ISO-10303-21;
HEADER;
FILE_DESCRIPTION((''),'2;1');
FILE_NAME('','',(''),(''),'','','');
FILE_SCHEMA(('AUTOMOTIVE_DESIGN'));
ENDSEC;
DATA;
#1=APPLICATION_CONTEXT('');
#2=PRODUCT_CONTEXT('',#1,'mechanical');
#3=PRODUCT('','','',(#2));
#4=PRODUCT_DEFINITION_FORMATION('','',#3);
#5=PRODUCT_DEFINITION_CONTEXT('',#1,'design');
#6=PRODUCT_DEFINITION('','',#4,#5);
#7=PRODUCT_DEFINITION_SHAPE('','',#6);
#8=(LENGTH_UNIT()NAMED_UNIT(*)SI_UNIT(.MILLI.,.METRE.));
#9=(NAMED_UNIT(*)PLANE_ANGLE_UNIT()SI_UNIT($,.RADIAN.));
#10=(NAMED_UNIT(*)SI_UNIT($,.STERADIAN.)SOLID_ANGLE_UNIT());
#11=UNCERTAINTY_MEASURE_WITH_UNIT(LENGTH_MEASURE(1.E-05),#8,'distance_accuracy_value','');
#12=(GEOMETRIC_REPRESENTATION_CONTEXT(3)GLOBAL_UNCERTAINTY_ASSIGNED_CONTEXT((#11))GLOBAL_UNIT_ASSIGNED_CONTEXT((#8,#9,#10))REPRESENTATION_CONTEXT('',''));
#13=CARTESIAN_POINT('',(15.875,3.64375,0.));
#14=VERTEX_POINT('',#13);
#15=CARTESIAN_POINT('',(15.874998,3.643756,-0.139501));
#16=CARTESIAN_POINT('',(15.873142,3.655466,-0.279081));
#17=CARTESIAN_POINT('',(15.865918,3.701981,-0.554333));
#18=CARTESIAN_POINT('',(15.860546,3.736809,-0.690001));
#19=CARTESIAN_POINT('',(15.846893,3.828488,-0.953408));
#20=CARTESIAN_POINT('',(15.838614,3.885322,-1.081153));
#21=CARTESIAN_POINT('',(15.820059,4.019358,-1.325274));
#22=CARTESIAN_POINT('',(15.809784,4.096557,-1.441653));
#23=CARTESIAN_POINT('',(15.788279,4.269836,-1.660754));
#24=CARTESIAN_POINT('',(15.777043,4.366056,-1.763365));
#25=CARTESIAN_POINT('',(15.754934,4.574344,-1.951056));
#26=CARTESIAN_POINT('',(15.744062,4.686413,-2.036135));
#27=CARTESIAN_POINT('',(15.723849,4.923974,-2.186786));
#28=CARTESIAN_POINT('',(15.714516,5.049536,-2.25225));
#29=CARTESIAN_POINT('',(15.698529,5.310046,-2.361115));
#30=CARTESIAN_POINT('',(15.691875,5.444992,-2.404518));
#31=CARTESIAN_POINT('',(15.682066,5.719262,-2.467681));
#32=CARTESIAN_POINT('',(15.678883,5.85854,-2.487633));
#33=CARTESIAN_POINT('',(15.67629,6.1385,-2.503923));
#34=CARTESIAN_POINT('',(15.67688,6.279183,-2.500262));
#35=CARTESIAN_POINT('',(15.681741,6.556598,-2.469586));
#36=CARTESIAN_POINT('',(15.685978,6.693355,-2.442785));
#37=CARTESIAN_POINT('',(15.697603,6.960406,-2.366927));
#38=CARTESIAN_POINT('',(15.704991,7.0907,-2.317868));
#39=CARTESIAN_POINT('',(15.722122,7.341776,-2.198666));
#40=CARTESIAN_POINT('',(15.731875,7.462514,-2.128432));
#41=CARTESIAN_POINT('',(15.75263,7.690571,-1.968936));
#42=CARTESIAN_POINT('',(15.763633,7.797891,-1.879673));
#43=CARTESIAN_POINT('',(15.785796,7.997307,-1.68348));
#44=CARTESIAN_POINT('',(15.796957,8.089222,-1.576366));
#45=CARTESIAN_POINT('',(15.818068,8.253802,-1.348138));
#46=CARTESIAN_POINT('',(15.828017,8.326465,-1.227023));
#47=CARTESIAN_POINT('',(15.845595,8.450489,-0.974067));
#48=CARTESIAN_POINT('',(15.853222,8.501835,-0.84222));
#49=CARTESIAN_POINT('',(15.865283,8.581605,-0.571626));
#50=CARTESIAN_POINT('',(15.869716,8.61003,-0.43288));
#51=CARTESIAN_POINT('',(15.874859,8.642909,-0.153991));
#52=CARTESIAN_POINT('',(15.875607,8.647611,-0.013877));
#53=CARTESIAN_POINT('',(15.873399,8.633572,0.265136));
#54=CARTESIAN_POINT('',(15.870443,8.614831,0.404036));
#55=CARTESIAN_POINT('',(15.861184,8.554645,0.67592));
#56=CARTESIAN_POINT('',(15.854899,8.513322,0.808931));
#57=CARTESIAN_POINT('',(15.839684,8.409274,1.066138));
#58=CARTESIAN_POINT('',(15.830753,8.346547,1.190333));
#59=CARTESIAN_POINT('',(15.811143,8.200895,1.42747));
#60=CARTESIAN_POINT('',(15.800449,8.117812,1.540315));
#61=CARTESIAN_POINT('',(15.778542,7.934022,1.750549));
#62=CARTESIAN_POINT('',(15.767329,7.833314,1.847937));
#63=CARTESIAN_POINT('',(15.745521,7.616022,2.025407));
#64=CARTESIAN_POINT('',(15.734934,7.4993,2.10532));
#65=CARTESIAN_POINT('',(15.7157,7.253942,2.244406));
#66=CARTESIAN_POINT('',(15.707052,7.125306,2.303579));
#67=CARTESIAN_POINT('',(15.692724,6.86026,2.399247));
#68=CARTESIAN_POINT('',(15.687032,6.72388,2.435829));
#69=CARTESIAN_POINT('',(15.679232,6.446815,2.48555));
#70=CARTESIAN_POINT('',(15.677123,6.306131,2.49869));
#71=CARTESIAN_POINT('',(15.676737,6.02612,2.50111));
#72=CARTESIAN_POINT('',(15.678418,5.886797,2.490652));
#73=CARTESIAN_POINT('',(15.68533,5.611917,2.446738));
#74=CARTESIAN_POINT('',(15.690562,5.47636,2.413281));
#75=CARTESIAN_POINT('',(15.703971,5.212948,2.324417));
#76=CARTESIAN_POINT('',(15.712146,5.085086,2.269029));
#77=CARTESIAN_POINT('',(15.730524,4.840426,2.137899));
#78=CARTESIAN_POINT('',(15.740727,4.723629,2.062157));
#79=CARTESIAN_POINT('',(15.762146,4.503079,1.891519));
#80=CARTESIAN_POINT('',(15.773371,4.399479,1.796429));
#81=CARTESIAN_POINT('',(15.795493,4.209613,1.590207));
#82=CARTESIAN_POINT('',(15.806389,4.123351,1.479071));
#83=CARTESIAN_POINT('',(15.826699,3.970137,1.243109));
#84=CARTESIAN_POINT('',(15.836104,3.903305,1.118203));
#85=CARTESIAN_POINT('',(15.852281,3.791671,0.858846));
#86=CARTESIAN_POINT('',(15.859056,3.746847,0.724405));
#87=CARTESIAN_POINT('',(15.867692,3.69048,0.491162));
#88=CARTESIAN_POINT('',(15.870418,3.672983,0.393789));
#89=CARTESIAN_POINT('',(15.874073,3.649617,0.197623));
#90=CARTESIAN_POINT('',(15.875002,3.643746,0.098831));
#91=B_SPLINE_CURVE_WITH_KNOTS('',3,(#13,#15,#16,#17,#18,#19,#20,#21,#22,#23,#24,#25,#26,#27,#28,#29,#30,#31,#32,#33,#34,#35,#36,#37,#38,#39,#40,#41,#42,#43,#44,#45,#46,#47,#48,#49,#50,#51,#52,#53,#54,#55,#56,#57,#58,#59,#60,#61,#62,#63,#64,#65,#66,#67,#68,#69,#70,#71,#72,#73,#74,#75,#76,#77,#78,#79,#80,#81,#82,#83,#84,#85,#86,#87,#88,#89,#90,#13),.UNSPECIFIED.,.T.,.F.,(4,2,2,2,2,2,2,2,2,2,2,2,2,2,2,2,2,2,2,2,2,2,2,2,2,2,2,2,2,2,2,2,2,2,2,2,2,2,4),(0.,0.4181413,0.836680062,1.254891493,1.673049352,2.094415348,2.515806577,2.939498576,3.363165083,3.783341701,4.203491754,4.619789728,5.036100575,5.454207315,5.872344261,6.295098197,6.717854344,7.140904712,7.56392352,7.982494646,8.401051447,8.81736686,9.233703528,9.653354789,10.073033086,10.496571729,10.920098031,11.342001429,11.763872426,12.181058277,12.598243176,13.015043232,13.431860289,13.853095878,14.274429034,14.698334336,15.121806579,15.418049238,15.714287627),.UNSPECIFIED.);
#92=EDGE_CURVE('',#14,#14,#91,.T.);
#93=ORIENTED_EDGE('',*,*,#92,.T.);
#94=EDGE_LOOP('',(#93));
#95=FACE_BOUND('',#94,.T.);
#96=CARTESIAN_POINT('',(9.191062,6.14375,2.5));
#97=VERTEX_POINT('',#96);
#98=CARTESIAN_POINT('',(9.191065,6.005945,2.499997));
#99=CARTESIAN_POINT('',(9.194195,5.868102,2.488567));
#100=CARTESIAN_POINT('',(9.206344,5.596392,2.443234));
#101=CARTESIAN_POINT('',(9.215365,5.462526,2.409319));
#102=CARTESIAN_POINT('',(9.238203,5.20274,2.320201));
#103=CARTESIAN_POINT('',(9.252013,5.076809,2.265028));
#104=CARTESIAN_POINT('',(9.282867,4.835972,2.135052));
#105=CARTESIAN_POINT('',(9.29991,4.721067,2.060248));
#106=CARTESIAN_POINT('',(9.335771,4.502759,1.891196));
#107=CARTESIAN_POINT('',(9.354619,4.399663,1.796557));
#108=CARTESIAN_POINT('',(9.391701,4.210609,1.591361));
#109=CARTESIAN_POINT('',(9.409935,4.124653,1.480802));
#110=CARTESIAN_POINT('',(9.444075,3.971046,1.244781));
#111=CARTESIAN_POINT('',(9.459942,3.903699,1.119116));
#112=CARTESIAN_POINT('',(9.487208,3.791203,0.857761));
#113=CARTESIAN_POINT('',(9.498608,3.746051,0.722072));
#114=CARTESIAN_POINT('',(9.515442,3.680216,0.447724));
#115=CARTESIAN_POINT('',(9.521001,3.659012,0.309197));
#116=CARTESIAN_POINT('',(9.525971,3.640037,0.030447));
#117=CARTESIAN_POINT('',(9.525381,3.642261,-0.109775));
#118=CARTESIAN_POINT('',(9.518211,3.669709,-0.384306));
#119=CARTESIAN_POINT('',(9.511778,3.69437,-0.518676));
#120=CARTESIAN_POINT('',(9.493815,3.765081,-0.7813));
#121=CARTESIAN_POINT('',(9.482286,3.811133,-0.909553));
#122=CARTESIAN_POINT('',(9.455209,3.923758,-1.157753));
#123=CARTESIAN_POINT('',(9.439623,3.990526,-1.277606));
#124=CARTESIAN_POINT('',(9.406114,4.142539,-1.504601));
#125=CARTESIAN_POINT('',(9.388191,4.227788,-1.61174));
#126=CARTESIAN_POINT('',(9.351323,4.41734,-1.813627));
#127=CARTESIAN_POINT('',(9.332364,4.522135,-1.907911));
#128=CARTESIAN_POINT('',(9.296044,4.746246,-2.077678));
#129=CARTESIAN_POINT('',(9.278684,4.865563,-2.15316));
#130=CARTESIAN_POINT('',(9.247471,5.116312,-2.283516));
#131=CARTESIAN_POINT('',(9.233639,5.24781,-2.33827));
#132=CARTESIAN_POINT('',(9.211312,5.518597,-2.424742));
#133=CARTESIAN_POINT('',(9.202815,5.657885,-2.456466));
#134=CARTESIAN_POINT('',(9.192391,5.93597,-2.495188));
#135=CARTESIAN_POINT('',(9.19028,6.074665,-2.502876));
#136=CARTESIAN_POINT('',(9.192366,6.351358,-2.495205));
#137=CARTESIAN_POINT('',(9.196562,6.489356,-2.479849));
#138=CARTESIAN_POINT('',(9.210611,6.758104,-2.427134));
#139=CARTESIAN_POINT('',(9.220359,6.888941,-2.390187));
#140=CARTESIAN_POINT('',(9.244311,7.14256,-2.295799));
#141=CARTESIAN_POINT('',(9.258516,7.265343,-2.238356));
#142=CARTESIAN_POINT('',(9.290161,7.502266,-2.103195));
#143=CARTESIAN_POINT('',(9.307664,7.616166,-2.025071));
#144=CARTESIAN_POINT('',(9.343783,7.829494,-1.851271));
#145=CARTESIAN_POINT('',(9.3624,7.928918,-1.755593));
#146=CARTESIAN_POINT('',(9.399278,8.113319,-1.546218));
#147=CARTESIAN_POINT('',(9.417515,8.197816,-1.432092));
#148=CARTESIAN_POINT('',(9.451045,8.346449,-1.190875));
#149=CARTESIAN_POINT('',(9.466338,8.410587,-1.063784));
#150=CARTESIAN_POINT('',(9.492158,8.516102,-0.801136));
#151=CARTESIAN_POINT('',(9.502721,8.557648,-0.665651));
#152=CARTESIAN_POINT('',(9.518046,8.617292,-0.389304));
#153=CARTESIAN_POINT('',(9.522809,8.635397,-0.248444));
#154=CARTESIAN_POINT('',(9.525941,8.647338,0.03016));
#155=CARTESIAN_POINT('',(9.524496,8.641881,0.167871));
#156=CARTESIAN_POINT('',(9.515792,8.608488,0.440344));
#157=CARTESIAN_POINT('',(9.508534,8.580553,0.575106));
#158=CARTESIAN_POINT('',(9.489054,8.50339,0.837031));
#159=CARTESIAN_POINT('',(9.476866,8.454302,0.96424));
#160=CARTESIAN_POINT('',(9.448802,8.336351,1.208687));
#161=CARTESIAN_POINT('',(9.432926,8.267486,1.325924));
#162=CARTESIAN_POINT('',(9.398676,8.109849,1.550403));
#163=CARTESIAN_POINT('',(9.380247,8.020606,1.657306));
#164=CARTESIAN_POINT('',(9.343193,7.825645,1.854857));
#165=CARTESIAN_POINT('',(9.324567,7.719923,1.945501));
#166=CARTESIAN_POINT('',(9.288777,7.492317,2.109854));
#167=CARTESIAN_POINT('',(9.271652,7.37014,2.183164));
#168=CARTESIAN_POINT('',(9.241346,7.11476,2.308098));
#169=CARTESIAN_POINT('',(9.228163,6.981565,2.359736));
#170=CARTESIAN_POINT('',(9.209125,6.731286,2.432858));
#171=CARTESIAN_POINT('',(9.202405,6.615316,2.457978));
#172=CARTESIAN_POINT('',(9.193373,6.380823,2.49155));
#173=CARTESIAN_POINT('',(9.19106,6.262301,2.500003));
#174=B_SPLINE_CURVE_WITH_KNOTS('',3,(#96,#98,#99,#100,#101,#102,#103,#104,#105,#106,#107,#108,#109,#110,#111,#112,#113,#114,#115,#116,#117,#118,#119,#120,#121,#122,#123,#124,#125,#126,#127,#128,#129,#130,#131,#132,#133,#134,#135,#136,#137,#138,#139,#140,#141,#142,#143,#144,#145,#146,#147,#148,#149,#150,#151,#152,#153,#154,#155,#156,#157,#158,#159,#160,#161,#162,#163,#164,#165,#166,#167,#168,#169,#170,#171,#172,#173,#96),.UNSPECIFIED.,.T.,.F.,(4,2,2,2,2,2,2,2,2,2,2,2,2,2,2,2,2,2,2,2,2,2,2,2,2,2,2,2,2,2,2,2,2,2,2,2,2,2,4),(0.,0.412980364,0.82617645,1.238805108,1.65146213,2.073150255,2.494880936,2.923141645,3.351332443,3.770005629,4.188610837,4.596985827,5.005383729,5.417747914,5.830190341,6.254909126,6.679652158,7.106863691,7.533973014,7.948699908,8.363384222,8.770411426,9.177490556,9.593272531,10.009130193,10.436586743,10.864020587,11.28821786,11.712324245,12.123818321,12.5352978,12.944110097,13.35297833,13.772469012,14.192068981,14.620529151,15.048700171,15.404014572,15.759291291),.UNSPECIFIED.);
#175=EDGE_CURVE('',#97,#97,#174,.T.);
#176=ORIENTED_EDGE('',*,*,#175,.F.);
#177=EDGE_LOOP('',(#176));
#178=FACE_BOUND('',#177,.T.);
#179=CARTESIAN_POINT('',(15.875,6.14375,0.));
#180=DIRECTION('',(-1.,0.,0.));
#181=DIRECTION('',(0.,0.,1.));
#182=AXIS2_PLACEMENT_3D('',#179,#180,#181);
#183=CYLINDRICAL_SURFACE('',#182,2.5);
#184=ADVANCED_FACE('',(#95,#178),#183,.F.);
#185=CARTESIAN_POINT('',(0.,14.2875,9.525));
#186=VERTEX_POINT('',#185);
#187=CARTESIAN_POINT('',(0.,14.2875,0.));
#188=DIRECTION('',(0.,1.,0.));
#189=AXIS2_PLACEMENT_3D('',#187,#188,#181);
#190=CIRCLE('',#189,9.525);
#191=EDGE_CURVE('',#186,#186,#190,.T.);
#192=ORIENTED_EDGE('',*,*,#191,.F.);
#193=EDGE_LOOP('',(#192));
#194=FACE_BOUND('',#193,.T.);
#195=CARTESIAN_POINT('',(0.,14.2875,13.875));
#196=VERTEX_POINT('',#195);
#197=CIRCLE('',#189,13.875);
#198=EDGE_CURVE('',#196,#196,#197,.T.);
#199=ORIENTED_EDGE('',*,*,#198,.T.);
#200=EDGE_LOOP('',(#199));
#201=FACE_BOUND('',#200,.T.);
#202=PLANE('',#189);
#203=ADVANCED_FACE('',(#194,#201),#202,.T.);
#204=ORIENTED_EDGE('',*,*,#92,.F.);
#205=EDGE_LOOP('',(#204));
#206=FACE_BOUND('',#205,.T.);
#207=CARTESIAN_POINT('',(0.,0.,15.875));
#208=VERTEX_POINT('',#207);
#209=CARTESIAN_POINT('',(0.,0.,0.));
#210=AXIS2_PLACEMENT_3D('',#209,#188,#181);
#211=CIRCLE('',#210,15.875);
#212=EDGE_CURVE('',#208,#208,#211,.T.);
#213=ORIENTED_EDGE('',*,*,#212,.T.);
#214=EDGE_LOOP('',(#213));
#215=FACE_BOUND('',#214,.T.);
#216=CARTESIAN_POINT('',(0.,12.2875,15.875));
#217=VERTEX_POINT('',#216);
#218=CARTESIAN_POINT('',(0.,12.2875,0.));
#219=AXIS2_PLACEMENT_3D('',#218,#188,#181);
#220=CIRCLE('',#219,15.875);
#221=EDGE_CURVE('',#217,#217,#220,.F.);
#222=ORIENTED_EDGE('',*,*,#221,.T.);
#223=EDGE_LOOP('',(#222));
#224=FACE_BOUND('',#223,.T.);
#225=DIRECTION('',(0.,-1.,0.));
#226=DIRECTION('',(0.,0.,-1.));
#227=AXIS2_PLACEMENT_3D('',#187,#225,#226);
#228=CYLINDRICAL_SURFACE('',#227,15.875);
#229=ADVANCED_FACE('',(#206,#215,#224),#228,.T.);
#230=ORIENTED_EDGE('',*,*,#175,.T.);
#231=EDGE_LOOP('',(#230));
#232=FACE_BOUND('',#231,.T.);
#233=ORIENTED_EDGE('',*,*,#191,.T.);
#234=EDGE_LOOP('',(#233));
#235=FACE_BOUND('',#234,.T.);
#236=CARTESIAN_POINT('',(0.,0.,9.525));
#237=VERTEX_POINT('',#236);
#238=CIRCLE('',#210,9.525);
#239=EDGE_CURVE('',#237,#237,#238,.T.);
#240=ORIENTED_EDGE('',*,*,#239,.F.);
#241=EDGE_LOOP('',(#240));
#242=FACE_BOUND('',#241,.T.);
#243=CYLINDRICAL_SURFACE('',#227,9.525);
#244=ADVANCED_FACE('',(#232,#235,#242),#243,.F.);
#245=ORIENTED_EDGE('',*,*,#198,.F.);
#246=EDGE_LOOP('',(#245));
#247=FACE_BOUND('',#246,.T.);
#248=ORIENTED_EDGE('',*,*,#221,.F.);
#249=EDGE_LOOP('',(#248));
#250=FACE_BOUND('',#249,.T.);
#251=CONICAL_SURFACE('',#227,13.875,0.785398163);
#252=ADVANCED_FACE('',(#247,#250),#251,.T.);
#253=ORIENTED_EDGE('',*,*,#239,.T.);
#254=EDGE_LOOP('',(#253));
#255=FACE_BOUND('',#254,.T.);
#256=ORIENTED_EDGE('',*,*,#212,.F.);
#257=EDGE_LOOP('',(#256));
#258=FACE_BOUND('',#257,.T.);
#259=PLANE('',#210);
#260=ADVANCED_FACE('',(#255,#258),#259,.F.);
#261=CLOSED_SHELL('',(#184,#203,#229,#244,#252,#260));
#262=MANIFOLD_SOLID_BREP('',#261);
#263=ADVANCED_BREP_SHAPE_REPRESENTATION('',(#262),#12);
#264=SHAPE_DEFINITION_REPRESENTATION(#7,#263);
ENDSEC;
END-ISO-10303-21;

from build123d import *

# Parameters (mm, degrees)
SKETCH1_R              = 15.875
SKETCH1_R_2            = 9.525
BOSS_EXTRUDE1_DEPTH    = 14.2875
CHAMFER1_SIZE          = 2
CUT_EXTRUDE1_START     = 9.191062133
CUT_EXTRUDE1_OUTLINE_R = 2.5
CUT_EXTRUDE1_DEPTH     = 6.683937969


# Read off the part's stored shape, not the designer's step: Cut-Extrude1
with BuildPart() as part:
    # Sketch1 → Boss-Extrude1 (new body)
    with BuildSketch(Plane(origin=(0, 0, 0), x_dir=(1, 0, 0), z_dir=(0, 1, 0))):
        with Locations(Location((0, 0, 0), (0, 0, 270))):
            Circle(SKETCH1_R)
        with Locations(Location((0, 0, 0), (0, 0, 270))):
            Circle(SKETCH1_R_2, mode=Mode.SUBTRACT)
    extrude(amount=BOSS_EXTRUDE1_DEPTH)

    # Chamfer1
    chamfer1_edges = [part.edges().sort_by_distance(p)[0] for p in [
        (0, 14.2875, -15.875),
    ]]
    chamfer(chamfer1_edges, length=CHAMFER1_SIZE)

    # Cut-Extrude1 outline → Cut-Extrude1 (cut)
    with BuildSketch(Plane.YZ.offset(CUT_EXTRUDE1_START)):
        with Locations((6.14375, 0)):
            Circle(CUT_EXTRUDE1_OUTLINE_R)
    extrude(amount=CUT_EXTRUDE1_DEPTH, mode=Mode.SUBTRACT)


solid = part.part
